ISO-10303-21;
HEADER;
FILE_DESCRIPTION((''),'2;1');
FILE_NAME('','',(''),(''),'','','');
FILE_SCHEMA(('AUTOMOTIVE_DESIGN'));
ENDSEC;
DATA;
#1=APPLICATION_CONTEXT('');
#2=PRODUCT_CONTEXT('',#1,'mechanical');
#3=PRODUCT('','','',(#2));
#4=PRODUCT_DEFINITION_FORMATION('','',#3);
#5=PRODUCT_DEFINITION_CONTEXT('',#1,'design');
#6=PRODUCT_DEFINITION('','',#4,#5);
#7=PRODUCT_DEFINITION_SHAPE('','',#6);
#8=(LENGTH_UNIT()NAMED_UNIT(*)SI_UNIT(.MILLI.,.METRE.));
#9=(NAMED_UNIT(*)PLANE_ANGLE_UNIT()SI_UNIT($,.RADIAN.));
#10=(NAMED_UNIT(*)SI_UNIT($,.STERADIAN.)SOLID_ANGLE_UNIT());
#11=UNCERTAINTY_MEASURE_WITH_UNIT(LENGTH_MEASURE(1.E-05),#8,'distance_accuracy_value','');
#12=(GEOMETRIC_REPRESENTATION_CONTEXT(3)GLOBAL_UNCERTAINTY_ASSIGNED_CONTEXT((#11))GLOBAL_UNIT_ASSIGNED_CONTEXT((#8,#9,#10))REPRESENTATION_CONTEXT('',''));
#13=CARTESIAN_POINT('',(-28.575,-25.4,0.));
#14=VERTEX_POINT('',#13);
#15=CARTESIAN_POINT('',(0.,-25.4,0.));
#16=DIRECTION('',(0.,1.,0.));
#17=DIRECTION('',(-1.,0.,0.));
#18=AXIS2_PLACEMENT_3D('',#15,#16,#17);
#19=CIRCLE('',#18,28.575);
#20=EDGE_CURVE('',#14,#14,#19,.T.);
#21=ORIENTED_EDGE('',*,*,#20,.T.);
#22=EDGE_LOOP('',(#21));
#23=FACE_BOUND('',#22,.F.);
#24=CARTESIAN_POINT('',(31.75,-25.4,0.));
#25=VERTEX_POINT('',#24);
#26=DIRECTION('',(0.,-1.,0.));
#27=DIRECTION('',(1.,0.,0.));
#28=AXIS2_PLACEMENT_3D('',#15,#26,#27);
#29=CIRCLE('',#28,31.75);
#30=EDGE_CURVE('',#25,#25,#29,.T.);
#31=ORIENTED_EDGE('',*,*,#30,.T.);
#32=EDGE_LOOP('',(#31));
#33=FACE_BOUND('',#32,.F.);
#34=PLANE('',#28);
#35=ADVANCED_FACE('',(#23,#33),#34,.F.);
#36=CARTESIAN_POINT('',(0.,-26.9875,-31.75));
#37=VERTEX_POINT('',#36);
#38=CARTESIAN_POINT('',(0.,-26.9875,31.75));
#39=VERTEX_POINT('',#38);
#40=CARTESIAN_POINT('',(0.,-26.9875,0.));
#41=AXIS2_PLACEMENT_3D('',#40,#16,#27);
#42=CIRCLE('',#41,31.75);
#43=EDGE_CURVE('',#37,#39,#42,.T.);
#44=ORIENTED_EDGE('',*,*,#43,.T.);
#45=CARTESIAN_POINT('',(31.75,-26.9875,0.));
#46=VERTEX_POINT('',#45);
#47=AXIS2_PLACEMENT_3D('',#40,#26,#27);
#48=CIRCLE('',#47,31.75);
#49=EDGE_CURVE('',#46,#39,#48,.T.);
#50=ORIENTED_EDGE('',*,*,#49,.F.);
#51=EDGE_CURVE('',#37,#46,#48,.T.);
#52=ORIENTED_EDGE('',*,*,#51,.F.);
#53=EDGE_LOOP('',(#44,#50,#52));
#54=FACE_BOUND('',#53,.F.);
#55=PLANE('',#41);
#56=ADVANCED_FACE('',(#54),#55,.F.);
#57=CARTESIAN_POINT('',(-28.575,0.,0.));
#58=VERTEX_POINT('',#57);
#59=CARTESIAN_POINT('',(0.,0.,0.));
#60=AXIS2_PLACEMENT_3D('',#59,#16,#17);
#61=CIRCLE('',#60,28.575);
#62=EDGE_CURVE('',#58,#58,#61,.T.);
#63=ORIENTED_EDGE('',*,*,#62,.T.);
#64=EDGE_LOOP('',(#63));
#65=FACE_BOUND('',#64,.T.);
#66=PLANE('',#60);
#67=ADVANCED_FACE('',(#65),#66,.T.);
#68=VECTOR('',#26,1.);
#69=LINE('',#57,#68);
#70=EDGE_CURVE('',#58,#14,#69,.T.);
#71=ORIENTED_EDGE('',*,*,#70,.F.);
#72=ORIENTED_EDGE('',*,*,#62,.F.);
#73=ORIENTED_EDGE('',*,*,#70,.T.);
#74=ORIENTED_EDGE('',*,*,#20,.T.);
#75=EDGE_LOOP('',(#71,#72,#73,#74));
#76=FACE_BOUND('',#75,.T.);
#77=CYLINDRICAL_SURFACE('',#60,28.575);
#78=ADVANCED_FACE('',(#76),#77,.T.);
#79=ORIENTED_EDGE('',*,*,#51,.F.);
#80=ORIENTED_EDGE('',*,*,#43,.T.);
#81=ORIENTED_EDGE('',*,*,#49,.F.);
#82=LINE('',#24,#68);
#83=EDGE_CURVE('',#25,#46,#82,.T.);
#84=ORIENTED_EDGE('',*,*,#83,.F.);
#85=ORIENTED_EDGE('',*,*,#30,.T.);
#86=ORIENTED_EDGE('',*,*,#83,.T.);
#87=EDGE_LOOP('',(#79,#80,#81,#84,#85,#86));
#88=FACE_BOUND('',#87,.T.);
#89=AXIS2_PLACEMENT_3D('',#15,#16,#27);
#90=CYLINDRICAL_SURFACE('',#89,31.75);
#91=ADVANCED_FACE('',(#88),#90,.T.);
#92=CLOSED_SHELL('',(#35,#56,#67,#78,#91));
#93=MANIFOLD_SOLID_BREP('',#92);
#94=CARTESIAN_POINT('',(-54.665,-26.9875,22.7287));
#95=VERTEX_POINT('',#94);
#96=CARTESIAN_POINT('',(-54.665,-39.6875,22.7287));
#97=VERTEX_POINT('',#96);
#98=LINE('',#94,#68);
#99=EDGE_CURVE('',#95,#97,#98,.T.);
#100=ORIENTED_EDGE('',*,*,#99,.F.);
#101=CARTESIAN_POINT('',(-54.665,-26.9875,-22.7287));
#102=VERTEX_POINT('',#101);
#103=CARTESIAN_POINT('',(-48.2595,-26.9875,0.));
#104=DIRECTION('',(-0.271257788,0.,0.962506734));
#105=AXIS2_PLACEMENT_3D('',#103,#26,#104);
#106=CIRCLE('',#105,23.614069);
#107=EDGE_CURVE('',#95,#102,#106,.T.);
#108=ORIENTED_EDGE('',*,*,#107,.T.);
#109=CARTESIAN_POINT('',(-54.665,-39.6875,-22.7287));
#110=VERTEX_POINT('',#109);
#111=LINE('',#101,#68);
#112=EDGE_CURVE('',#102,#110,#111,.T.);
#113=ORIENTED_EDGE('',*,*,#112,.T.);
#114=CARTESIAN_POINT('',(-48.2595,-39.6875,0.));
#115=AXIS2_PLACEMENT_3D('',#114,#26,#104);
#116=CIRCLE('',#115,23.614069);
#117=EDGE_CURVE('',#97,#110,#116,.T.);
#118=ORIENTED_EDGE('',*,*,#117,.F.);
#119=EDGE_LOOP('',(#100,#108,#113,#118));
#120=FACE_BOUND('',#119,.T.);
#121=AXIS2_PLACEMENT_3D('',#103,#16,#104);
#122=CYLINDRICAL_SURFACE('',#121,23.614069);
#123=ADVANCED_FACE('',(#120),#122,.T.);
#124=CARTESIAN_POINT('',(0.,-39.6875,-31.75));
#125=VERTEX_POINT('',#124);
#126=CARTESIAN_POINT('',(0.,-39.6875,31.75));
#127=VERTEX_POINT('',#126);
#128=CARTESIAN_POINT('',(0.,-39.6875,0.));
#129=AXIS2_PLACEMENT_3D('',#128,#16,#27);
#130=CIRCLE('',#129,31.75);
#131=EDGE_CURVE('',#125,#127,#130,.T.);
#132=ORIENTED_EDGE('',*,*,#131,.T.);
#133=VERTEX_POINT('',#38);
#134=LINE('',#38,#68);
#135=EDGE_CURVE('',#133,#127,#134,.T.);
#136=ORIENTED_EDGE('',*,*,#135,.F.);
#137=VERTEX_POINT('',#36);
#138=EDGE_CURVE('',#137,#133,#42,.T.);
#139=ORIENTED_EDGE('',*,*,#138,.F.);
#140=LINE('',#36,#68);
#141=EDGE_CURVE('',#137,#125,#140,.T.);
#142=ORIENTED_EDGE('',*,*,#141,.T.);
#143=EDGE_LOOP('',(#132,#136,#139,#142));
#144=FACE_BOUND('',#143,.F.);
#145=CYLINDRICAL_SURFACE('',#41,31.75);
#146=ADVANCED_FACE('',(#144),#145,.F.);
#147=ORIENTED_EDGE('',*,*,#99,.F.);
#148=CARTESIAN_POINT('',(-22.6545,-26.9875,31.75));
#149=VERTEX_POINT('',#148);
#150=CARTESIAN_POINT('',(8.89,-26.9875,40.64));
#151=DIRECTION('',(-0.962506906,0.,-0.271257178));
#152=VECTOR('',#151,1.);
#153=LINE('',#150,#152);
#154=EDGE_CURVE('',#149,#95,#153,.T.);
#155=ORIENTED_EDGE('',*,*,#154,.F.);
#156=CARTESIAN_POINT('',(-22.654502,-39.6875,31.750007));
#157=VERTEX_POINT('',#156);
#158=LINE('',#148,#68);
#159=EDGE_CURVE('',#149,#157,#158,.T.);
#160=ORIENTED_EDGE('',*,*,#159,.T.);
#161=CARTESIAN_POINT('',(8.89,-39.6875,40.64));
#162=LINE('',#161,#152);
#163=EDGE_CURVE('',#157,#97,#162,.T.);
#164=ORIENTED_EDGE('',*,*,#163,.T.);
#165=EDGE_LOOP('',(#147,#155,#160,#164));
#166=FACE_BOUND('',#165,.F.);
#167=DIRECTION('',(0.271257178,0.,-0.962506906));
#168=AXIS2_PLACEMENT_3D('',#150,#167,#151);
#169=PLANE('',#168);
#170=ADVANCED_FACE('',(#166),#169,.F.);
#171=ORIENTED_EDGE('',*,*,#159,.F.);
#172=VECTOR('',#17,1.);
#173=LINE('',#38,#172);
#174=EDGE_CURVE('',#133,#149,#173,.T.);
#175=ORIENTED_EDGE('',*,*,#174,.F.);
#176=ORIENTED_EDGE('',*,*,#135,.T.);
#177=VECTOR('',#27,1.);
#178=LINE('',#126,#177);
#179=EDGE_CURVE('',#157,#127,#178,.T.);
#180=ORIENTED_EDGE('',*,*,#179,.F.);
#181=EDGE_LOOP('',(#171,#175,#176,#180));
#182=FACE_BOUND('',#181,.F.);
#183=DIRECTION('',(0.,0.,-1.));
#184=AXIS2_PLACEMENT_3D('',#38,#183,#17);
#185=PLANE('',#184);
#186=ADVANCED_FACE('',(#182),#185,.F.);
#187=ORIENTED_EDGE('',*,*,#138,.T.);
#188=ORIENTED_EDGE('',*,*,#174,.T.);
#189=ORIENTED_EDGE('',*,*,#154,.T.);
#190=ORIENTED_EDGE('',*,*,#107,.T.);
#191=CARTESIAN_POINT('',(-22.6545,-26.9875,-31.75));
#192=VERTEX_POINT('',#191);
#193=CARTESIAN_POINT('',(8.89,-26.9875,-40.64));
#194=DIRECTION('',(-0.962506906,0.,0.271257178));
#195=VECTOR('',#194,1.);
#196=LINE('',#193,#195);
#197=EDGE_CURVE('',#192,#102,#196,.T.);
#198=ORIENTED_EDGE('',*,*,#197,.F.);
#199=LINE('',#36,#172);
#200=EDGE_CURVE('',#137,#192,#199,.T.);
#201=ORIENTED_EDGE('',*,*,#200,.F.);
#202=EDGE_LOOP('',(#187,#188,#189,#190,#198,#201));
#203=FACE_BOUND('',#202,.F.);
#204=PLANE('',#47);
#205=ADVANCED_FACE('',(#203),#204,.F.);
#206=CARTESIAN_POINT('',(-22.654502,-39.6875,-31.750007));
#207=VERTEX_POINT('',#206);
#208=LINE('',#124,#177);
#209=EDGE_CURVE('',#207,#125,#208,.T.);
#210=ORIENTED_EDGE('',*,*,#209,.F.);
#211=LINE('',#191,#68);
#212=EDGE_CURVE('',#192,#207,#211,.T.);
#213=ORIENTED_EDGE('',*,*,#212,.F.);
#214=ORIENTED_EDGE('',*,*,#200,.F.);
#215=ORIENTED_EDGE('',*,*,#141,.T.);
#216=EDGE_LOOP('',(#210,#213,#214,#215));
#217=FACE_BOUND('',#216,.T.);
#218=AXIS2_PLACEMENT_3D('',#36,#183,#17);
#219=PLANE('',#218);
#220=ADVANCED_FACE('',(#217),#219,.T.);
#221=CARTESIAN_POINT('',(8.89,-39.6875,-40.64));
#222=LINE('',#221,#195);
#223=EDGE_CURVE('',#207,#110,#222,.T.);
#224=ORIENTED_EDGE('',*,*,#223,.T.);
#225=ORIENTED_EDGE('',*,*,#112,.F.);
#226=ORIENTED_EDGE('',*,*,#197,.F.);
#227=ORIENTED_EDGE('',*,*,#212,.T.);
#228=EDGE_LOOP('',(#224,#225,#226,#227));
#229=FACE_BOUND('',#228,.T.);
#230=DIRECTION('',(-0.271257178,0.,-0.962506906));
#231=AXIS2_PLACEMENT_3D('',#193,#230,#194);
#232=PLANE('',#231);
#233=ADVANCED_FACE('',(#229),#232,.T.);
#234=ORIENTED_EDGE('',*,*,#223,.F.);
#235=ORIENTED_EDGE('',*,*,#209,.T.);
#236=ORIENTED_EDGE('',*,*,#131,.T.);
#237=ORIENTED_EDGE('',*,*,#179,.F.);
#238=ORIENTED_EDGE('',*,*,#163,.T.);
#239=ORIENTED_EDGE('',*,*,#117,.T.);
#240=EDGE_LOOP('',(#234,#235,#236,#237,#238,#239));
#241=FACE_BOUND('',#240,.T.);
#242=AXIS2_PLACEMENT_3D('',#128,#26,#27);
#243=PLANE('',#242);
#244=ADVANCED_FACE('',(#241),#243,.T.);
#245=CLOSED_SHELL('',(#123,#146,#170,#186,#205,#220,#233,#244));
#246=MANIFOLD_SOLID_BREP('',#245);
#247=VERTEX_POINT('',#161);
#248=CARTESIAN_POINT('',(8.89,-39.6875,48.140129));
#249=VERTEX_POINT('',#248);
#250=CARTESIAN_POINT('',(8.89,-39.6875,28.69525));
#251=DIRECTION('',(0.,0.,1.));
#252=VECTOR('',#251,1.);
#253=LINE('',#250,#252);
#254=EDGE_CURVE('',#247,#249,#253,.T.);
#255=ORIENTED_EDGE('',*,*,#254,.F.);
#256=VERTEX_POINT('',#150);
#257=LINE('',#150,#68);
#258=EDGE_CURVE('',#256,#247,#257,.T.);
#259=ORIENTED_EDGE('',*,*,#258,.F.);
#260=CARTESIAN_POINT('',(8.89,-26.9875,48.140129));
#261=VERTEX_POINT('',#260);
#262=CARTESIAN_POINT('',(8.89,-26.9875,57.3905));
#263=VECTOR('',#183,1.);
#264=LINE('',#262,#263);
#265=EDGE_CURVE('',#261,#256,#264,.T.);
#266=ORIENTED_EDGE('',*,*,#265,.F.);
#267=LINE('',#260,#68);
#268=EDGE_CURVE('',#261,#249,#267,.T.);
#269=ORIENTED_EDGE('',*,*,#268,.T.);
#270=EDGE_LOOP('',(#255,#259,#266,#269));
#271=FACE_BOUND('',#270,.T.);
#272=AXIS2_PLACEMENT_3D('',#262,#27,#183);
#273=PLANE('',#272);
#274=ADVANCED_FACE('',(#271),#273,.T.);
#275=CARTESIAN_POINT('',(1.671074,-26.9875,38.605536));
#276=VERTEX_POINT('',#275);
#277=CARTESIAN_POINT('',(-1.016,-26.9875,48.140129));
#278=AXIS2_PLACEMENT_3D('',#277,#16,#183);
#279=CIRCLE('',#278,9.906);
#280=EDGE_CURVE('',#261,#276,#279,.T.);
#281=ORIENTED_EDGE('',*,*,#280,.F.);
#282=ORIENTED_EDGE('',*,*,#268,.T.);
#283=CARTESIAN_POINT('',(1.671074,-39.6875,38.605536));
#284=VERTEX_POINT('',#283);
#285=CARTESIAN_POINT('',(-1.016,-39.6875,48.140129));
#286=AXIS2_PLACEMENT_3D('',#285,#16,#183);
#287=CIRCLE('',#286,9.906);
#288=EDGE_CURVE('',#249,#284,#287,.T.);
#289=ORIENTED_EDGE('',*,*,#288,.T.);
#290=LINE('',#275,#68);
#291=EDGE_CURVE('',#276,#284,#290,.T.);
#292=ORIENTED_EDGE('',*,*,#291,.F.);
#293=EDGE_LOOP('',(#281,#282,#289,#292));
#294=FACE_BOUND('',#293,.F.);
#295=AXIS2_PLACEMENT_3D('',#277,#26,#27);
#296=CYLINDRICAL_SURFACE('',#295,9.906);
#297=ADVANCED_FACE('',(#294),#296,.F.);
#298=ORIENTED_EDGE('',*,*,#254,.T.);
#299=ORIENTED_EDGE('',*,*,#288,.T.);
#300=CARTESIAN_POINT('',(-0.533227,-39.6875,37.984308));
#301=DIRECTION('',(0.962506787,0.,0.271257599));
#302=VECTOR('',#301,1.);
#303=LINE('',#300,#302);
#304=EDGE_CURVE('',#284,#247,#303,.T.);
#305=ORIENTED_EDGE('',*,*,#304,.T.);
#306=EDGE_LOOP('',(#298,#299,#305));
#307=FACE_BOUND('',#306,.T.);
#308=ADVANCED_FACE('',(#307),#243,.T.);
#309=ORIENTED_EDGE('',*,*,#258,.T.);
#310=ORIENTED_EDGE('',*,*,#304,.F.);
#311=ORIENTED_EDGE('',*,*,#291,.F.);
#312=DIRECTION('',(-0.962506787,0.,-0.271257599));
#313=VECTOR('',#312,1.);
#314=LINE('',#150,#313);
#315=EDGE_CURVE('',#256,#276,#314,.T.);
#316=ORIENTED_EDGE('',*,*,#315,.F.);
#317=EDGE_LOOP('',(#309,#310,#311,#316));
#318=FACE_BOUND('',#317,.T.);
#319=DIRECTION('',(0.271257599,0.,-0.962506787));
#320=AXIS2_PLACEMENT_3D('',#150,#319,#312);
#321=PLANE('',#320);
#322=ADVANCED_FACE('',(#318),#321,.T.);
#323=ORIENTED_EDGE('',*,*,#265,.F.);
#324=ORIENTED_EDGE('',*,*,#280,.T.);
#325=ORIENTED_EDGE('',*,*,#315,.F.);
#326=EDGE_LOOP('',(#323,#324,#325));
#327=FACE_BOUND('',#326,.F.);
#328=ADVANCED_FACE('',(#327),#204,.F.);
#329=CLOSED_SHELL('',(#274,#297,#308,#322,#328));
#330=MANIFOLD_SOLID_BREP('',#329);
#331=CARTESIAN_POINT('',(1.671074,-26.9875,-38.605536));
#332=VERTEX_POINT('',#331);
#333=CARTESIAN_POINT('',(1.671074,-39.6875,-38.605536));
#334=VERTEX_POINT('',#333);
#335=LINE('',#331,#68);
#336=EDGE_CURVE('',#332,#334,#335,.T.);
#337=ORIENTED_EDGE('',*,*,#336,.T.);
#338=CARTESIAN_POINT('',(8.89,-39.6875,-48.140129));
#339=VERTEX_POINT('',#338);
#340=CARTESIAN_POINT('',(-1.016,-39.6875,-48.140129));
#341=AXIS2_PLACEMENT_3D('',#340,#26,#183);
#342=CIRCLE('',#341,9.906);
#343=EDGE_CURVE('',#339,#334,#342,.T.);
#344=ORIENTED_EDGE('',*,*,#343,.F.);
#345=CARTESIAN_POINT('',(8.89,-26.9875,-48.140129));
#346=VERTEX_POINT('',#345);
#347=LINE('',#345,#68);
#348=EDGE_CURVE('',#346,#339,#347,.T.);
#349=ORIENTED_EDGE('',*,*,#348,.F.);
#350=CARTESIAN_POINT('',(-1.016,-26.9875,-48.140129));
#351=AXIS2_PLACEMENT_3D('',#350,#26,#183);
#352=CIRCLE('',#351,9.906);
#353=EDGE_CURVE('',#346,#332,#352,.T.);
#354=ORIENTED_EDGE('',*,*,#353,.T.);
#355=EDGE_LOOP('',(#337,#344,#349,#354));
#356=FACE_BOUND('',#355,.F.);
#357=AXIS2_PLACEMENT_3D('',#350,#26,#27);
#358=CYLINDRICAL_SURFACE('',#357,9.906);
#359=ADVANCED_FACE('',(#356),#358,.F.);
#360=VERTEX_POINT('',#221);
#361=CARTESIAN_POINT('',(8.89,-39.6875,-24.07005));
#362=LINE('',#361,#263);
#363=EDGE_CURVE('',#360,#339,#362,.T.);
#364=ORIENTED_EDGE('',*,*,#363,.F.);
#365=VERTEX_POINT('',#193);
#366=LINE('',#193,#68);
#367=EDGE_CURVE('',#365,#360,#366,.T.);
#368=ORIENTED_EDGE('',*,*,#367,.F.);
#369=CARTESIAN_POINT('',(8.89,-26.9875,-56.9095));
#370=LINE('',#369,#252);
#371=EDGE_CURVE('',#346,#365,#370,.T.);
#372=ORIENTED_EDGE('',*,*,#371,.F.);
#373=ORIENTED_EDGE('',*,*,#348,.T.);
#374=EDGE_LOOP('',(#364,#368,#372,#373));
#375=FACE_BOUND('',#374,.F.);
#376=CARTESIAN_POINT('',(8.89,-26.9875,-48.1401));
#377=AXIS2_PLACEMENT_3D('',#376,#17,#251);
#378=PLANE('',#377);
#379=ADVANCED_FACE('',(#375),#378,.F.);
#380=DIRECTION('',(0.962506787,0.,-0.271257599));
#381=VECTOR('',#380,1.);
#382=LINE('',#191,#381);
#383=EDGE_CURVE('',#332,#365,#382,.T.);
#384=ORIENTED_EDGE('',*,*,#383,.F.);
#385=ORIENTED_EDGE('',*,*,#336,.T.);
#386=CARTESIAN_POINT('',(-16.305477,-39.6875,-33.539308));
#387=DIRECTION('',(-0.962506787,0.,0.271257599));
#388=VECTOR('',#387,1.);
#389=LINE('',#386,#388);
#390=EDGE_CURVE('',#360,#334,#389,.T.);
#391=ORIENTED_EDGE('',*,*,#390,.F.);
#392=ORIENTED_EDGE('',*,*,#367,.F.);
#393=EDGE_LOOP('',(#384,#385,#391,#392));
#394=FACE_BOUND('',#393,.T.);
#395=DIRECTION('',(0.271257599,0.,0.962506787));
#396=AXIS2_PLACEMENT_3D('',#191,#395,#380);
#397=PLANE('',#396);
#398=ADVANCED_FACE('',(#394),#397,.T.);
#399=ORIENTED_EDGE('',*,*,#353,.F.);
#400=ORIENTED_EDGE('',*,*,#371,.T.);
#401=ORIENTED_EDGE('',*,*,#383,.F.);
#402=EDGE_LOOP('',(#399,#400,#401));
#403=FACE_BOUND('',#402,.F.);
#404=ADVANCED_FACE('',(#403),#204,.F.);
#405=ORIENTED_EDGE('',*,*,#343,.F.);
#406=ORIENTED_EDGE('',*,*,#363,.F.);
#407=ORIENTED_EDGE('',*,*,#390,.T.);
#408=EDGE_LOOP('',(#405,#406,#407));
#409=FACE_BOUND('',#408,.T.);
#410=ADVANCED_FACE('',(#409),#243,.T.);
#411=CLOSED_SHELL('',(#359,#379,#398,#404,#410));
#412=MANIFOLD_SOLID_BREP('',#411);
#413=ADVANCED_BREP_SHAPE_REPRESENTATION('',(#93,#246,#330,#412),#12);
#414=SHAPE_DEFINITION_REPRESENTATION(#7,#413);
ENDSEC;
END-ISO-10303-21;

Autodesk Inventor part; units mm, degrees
ref_plane "YZ Plane" through (0, 0, 0) normal (1, 0, 0) x (0, 1, 0)
ref_plane "XZ Plane" through (0, 0, 0) normal (0, 1, 0) x (-1, 0, 0)
ref_plane "XY Plane" through (0, 0, 0) normal (0, 0, 1) x (1, 0, 0)
sketch "Sketch2" plane through (0, 0, 0) normal (0, 1, 0) x (-1, 0, 0)
  circle A0 centre (0, 0) radius 28.575
  dimension "d0" = 57.15
extrude "Extrusion1" add sketch "Sketch2" against normal blind 25.4
sketch "Sketch3" plane through (0, -25.4, 0) normal (0, -1, 0) x (1, 0, 0)
  circle A0 centre (0, 0) radius 31.75
  dimension "d3" = 63.5
extrude "Extrusion2" add sketch "Sketch3" along normal blind 1.5875
sketch "Sketch4" plane through (0, -26.9875, 0) normal (0, -1, 0) x (1, 0, 0)
  arc A0 (8.89, -56.9095) -> (8.89, 57.3905) centre (8.89, 0.2405) ccw
  arc A1 (-54.665, 22.7287) -> (-54.665, -22.7287) centre (-48.2595, 0) ccw
  line L0 (8.89, -56.9095) -> (8.89, 57.3905) construction
  line L1 (8.89, -40.64) -> (-54.665, -22.7287)
  line L2 (0, 0) -> (66.0395, 0) construction
  line L3 (8.89, 40.64) -> (-54.665, 22.7287)
  line L4 (8.89, 40.64) -> (8.89, 57.3905)
  line L5 (8.89, -40.64) -> (8.89, -56.9095)
  circle A2 centre (0, 0) radius 28.575
  line L6 (18.7922, 40.64) -> (8.89, 40.64)
  line L7 (8.89, -40.64) -> (18.7922, -40.64)
  arc A3 (18.7922, -40.64) -> (18.7922, 40.64) centre (0.7869, 0) ccw
  line L8 (18.7922, 40.64) -> (18.7922, 56.5261)
  line L9 (18.7922, -56.045) -> (18.7922, -40.64)
  line L10 (18.7922, -21.5263) -> (18.7922, 21.5263)
  point P0 (-61.1412, -20.9035)
  point P1 (38.37, -48.7192)
  point P2 (-61.1412, 20.9035)
  dimension "d6" = 114.3
  dimension "d7" = 47.2281
  dimension "d8" = 57.15
  dimension "d11" = 81.28
  dimension "d30" = 44.45
extrude "Extrusion3" add sketch "Sketch4" along normal blind 12.7 contours L5 L7 L9 A0 | L9 A3 L8 A0 | L1 A1 L3 L6 A3 L7 | L8 L6 L4 A0 | A2 L10 | L10 A2
fillet "Fillet1" radius 9.906 1 edges at (8.89, -33.3375, 40.64)
fillet "Fillet2" radius 9.906 1 edges at (8.89, -33.3375, -40.64)
sketch "Sketch10" plane through (0, -26.9875, 0) normal (0, 1, 0) x (1, 0, 0)
  circle A0 centre (0, 0) radius 31.75 projected
  line L0 (0, -31.75) -> (-22.6545, -31.75)
  line L1 (1.6711, -38.6055) -> (-54.665, -22.7287) construction
  line L2 (0, -38.1346) -> (-54.665, -22.7287) construction
  line L3 (0, 31.75) -> (-22.6545, 31.75)
  line L4 (-54.665, 22.7287) -> (1.6711, 38.6055) construction
  line L5 (0, 38.1346) -> (-51.396, 23.65) construction
  line L6 (-22.6545, 31.75) -> (8.89, 40.64)
  arc A1 (8.89, -57.3905) -> (8.89, 56.9095) centre (8.89, -0.2405) ccw projected
  line L7 (8.89, 56.9095) -> (8.89, 40.64)
  line L8 (8.89, 40.64) -> (-22.6545, 31.75)
  line L9 (0, -31.75) -> (-22.6545, -31.75)
  line L10 (8.89, -40.64) -> (-22.6545, -31.75)
  line L11 (8.89, -57.3905) -> (8.89, -40.64)
  line L12 (8.89, 48.1401) -> (8.89, 56.9095) projected
  arc A2 (8.89, -57.3905) -> (8.89, 56.9095) centre (8.89, -0.2405) ccw
  arc A3 (0, -31.75) -> (0, 31.75) centre (0, 0) ccw
  point P0 (0, 0)
extrude "Extrusion9" cut sketch "Sketch10" against normal blind 25.4
properties part number "new_cigueñal"
